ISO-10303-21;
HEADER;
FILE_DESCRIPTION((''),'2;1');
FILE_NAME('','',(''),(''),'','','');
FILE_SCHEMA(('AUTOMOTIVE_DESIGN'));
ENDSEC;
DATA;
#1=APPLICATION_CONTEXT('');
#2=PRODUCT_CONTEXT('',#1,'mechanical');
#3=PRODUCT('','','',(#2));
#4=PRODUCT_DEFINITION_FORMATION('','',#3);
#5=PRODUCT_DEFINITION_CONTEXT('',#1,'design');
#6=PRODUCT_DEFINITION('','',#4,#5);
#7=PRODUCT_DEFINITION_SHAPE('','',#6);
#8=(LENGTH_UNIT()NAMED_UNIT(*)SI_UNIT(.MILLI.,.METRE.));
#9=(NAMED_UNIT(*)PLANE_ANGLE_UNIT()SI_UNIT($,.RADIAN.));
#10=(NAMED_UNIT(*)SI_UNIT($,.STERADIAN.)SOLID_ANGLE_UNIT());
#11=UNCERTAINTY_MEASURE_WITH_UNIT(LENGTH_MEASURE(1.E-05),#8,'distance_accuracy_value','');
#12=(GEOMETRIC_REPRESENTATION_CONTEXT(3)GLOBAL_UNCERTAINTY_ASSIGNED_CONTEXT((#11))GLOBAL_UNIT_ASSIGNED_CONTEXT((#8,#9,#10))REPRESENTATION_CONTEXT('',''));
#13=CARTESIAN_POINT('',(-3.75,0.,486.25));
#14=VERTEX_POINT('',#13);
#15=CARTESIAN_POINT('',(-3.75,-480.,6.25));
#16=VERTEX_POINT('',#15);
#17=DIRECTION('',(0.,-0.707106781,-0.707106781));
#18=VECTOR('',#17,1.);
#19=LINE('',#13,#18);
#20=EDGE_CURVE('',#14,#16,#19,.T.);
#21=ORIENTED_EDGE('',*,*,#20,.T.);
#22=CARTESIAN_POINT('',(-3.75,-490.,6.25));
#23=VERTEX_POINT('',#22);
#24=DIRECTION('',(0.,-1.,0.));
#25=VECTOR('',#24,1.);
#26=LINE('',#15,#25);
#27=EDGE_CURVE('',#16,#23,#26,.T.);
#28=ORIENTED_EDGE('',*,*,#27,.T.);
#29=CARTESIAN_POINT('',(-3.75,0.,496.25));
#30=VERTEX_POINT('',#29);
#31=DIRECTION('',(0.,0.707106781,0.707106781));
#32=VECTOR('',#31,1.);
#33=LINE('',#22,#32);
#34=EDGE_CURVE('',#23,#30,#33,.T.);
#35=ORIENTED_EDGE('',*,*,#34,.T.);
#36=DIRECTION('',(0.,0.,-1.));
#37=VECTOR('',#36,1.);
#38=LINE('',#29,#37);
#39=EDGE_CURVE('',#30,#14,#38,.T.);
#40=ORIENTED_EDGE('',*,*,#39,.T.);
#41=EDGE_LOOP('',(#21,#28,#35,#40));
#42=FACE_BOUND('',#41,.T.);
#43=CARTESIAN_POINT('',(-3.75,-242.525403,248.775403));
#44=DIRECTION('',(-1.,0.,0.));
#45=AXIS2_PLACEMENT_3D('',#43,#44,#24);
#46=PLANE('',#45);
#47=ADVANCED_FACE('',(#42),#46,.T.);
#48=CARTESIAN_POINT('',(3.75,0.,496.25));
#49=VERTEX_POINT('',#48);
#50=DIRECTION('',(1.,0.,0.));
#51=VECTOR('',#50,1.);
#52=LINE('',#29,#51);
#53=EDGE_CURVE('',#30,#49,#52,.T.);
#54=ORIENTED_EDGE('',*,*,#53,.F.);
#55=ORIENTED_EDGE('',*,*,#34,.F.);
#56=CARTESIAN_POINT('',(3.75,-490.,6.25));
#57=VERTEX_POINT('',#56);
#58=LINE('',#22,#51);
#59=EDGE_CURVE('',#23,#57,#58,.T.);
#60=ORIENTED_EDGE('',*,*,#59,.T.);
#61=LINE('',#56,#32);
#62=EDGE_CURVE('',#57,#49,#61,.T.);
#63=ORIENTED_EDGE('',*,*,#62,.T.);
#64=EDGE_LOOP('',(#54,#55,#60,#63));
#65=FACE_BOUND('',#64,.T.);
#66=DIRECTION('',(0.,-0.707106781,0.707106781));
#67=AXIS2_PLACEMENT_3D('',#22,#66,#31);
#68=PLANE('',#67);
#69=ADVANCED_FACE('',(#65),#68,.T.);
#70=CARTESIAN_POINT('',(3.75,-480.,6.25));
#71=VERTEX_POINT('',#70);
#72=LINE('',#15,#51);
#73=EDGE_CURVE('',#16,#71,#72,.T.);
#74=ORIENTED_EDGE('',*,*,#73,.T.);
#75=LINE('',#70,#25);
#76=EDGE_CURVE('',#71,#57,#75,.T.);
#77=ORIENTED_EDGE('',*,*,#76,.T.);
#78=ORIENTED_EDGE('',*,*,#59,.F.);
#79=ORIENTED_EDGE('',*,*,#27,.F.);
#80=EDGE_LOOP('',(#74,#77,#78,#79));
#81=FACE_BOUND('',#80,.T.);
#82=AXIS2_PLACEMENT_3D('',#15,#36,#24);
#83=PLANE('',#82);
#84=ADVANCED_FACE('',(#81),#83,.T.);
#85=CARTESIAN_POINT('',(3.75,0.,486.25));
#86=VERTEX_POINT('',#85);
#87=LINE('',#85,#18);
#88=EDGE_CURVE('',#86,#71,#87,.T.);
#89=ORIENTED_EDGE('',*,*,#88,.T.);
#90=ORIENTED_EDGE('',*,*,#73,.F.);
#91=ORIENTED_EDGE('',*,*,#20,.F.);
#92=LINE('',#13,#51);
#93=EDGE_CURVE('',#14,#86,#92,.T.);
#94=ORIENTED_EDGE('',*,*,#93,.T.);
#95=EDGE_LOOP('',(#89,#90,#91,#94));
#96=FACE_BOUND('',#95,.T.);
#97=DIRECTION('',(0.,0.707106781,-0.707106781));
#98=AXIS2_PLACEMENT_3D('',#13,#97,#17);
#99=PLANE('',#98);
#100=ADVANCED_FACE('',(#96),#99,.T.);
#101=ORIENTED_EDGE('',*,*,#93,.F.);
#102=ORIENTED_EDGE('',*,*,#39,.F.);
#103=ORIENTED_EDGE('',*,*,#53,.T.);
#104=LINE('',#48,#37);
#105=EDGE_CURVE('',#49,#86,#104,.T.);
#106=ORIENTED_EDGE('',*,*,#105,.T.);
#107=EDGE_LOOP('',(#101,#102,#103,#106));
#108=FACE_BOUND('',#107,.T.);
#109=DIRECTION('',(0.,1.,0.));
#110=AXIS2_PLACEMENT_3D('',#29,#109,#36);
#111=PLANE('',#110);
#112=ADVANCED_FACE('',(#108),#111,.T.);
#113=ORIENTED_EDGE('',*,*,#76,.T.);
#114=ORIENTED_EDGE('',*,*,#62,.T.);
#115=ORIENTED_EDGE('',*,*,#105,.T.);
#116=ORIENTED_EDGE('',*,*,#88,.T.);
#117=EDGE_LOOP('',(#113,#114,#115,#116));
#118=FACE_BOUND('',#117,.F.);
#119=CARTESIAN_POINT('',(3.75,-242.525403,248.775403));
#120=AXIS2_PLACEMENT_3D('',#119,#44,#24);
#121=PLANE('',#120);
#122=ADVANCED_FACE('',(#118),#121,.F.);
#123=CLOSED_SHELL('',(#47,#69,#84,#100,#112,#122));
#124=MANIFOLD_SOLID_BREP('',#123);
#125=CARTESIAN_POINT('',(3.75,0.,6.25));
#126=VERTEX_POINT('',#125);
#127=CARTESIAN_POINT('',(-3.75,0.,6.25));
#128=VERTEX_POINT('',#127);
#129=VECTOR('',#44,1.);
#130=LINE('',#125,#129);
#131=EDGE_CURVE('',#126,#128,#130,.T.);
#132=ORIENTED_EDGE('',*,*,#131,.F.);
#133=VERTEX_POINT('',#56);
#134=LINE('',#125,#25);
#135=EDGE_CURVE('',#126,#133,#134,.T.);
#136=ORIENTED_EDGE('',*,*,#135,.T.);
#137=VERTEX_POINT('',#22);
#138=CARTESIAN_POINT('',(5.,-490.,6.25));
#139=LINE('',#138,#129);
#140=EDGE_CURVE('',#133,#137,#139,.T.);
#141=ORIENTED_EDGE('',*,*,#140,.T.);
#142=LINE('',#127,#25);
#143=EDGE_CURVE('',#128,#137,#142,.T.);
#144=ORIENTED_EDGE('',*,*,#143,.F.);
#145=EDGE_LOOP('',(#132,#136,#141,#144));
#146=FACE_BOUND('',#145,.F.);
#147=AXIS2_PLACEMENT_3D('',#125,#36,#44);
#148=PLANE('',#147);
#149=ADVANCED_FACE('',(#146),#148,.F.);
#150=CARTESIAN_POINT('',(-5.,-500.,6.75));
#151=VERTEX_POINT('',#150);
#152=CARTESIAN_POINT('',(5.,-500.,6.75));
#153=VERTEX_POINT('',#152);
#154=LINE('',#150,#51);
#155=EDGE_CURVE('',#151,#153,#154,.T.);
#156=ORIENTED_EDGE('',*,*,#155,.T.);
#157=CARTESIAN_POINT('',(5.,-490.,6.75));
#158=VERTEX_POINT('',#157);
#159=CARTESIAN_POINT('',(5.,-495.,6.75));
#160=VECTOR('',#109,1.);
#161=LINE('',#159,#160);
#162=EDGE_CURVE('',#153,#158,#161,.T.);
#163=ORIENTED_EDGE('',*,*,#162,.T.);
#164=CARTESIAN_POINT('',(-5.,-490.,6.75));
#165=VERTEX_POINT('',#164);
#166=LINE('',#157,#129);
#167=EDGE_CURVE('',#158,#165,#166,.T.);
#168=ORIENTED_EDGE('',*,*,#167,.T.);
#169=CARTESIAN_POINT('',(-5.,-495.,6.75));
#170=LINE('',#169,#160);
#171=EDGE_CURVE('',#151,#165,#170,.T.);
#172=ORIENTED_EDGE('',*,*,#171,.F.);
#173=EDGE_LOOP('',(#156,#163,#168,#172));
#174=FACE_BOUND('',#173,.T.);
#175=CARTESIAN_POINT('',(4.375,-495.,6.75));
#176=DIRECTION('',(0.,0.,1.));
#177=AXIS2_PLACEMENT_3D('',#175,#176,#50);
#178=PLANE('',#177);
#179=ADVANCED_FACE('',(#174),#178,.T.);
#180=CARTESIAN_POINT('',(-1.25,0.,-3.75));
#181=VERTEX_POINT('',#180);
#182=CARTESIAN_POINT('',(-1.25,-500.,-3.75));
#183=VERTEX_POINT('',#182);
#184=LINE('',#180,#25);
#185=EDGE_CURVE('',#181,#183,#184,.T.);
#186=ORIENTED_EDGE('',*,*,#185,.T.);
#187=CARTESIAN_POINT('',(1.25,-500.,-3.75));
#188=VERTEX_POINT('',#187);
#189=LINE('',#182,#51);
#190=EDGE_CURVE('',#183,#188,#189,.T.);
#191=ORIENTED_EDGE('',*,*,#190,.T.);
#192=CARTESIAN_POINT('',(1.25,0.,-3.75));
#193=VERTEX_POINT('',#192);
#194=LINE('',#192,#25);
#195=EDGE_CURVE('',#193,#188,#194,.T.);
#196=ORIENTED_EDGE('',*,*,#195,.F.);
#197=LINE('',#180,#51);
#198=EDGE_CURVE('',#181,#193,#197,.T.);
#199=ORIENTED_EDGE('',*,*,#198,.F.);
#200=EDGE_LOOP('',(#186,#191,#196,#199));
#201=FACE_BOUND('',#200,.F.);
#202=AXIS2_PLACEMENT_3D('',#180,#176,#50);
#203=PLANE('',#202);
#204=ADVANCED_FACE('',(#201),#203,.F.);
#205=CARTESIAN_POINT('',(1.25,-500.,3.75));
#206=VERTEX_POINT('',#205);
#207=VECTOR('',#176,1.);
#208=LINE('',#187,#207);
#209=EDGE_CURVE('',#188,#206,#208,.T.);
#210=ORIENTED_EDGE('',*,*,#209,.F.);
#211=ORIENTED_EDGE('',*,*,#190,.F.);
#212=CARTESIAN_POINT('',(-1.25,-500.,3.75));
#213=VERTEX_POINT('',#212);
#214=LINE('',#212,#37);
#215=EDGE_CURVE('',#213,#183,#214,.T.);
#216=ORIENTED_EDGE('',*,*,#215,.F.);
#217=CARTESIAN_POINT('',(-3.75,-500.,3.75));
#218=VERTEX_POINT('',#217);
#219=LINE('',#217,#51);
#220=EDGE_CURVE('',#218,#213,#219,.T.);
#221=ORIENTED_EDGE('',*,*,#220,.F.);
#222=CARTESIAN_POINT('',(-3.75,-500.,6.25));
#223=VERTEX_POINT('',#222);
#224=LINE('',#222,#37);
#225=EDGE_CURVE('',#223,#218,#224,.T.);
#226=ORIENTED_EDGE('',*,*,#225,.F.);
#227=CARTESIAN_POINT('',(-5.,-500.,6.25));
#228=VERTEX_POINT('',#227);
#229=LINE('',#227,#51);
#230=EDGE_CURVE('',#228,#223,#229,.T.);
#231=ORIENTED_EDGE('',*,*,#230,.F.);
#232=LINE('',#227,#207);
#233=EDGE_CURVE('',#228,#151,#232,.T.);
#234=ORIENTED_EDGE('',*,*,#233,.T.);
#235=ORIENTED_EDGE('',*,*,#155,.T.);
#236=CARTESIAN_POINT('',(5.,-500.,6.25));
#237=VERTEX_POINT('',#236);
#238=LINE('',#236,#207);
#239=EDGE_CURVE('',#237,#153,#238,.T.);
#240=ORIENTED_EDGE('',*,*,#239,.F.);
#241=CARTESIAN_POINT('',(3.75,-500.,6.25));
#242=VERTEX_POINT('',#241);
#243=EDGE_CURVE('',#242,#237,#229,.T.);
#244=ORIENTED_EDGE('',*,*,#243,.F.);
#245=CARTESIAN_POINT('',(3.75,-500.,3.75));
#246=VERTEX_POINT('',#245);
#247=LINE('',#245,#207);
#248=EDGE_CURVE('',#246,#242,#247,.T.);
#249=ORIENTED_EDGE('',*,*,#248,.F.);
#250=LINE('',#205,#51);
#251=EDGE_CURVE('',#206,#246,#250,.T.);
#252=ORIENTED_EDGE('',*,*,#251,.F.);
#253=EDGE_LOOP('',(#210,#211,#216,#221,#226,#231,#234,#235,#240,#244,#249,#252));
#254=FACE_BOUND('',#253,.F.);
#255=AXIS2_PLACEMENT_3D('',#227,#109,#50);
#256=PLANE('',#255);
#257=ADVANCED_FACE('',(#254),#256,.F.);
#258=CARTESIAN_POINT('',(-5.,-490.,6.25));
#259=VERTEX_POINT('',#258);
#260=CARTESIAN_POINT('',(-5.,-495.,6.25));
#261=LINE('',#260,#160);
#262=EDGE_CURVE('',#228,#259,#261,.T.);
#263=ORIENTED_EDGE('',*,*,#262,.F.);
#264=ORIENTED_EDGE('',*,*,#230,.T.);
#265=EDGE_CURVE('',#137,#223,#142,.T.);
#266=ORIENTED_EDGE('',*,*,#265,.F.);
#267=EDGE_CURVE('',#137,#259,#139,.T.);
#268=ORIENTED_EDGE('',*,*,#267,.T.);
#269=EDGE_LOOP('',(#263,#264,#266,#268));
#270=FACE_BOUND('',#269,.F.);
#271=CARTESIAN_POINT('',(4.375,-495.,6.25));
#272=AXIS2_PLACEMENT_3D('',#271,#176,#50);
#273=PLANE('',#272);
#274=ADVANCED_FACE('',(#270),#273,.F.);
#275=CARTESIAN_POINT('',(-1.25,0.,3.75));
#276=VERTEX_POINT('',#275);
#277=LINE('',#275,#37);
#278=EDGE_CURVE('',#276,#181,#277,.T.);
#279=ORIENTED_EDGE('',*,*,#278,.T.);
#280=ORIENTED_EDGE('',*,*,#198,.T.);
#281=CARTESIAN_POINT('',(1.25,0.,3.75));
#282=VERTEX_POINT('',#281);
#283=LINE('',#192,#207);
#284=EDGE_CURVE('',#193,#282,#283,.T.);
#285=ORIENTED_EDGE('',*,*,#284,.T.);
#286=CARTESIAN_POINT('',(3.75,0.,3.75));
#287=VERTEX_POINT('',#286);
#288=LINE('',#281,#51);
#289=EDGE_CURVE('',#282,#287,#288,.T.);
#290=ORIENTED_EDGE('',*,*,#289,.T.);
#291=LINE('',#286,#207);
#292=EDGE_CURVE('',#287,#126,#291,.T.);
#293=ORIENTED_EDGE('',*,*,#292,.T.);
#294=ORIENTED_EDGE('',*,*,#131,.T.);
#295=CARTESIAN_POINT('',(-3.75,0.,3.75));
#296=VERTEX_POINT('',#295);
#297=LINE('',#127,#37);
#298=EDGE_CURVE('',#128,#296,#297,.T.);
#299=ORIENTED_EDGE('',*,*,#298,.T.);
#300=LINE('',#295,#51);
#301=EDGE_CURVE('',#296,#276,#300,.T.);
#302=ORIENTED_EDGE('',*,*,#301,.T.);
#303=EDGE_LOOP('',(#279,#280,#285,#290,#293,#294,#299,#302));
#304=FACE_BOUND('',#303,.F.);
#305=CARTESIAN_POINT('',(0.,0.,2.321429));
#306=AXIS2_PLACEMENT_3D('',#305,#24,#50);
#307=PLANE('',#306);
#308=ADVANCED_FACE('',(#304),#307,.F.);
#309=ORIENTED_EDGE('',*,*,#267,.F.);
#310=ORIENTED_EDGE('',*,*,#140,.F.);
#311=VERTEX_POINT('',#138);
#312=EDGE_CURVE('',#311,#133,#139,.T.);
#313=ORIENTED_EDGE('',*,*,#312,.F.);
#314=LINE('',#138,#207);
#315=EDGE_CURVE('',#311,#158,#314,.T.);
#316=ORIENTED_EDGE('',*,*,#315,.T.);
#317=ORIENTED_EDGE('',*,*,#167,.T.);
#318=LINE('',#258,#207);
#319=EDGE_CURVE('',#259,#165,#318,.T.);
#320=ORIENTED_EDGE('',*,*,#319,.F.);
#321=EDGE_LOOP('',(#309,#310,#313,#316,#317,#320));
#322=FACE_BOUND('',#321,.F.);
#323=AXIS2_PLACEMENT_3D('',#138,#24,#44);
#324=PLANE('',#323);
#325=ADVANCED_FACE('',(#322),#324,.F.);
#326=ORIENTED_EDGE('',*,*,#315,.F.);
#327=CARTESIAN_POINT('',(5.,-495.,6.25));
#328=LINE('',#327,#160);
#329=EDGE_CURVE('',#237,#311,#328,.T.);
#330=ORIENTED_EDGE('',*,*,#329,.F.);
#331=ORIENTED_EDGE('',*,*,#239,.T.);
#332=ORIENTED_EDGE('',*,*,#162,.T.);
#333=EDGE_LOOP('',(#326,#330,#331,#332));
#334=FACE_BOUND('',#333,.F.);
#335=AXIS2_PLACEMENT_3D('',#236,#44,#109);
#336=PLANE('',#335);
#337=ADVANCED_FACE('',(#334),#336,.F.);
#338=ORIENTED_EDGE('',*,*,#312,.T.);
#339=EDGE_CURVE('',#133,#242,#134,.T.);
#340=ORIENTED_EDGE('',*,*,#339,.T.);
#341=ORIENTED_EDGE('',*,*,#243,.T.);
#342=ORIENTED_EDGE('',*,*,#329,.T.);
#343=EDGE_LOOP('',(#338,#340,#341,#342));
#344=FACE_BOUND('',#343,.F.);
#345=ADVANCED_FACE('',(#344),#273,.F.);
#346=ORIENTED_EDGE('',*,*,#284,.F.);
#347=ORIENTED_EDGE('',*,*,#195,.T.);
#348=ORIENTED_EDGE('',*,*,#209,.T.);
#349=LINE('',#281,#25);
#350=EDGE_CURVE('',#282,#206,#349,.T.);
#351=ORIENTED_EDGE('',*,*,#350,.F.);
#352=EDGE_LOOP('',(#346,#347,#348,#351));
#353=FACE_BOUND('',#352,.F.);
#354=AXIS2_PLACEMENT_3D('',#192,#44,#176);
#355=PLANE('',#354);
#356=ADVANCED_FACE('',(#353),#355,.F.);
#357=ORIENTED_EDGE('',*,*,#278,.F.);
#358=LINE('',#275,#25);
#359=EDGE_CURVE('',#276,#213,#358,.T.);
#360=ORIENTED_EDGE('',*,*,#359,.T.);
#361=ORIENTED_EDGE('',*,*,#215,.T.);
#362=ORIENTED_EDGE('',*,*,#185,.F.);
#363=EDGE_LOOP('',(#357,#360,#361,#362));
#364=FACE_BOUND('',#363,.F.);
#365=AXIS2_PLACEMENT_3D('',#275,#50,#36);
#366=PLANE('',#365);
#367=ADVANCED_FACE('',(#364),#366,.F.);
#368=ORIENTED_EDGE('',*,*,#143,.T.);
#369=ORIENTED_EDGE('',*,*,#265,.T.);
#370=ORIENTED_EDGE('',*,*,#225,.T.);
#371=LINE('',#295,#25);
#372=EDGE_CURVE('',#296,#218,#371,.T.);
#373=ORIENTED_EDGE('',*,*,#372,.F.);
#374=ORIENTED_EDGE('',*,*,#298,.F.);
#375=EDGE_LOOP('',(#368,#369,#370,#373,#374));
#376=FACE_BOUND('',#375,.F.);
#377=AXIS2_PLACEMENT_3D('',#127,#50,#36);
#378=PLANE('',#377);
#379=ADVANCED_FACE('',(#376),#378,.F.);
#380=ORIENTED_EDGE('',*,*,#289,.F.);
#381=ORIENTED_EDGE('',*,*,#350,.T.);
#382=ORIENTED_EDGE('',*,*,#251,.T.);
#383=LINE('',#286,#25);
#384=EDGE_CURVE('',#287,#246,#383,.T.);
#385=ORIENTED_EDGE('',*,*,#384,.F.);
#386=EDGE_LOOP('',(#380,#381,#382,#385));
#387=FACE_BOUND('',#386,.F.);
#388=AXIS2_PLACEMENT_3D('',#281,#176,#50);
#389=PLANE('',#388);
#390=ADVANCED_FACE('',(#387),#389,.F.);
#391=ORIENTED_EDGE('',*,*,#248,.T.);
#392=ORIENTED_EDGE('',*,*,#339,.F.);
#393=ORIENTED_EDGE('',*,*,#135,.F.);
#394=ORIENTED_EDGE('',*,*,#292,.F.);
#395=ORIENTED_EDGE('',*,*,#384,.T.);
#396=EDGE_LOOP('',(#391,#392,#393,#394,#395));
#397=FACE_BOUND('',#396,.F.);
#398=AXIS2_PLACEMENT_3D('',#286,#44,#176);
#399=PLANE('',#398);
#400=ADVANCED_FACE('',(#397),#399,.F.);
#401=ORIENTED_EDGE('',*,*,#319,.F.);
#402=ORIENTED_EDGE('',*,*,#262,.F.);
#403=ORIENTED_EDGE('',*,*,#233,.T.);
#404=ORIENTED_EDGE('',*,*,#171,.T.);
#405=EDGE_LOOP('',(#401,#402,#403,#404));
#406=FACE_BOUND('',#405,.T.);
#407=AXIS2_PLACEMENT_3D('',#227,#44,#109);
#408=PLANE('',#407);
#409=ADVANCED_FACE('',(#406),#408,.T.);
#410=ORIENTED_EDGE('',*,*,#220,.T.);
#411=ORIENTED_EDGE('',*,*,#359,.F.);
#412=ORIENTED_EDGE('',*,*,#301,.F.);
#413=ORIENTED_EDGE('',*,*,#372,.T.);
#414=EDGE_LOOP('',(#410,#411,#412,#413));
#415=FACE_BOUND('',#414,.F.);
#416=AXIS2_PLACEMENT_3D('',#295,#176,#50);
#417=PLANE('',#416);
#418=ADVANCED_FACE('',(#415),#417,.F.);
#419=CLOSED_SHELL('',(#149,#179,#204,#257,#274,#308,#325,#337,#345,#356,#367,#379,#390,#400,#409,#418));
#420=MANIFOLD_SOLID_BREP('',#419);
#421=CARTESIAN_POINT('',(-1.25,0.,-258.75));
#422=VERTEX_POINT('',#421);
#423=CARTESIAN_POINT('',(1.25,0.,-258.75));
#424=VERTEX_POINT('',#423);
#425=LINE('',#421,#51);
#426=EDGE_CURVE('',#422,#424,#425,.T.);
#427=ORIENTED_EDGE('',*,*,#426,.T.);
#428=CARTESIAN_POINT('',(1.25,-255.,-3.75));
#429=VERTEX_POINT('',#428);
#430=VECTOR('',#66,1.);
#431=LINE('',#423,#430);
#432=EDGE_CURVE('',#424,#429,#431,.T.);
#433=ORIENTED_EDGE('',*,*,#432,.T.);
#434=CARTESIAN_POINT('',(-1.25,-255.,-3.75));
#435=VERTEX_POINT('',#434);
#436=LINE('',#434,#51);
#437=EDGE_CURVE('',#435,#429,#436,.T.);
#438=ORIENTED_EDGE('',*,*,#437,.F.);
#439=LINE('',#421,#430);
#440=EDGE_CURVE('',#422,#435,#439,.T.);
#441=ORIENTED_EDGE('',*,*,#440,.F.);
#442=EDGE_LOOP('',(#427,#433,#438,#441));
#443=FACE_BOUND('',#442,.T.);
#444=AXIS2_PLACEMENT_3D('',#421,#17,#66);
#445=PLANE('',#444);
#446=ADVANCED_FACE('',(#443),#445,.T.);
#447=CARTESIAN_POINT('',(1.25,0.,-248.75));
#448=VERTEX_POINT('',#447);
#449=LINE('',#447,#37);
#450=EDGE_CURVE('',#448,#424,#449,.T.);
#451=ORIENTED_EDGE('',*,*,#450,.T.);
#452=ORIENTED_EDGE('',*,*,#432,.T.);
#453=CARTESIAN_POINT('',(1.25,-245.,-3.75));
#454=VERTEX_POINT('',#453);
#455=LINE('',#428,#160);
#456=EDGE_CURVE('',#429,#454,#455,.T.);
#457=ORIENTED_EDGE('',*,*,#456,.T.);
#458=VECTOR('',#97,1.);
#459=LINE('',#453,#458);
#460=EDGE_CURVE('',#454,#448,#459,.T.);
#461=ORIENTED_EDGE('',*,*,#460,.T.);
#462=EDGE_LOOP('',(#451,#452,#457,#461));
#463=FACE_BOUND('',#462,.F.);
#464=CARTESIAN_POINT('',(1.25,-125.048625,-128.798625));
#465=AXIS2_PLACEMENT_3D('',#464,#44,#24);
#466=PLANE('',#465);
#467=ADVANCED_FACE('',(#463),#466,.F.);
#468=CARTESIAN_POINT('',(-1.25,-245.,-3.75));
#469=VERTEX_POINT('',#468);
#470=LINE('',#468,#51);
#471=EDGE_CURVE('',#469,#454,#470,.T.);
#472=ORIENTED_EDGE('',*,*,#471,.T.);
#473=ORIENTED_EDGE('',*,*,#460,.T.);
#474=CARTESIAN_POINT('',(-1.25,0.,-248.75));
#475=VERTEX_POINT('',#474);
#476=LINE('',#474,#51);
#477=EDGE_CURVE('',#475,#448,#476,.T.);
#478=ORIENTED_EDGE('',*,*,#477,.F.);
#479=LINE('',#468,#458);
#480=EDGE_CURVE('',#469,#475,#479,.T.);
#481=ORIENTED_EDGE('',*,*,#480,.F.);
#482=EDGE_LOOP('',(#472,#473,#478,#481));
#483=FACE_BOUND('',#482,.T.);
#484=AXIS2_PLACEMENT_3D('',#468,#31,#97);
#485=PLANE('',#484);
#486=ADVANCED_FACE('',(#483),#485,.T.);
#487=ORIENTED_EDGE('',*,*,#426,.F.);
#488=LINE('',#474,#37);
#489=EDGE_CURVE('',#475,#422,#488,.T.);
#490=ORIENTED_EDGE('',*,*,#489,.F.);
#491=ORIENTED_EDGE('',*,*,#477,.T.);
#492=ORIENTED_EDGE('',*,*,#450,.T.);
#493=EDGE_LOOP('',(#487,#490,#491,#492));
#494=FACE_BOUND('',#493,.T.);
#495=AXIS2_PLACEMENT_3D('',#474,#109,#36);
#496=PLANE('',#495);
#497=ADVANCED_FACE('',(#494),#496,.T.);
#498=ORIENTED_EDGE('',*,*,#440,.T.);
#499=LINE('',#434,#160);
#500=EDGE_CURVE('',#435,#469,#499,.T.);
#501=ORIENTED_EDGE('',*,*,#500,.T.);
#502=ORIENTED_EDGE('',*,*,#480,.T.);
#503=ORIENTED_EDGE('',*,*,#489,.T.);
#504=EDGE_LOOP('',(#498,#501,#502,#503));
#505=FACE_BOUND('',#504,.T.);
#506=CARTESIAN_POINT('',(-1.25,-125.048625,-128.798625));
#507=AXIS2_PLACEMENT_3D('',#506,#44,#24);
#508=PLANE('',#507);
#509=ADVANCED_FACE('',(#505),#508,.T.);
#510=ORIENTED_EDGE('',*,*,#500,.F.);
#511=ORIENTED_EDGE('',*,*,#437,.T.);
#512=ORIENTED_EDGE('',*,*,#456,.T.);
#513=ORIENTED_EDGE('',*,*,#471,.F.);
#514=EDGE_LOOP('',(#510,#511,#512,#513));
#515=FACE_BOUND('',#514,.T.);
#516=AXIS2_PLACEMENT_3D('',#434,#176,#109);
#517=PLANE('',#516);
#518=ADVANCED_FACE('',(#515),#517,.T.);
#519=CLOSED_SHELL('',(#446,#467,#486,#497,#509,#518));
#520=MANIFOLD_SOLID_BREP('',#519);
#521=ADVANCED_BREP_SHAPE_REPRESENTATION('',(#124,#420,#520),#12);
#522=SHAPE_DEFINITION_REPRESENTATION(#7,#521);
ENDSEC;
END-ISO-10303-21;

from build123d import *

# Parameters (mm, degrees)
F1_DEPTH = 500
F3_DEPTH = 7.5
F5_DEPTH = 2.5
F6_W     = 1.25
F6_H     = 10
F6_W_2   = 7.5
F7_DEPTH = 0.5


with BuildPart() as f1:
    # F0 (on Front) → F1 (new body)
    with BuildSketch(Plane.XZ):
        Polygon((-1.25, 3.75), (-1.25, -3.75), (1.25, -3.75), (1.25, 3.75), (3.75, 3.75), (3.75, 6.25), (-3.75, 6.25), (-3.75, 3.75), align=None)
    extrude(amount=F1_DEPTH)

    # F6 (on face) → F7 (join)
    with BuildSketch(Plane.XY.offset(6.25)):
        with Locations((4.375, -495)):
            Rectangle(F6_W, F6_H)
        with Locations((0, -495)):
            Rectangle(F6_W_2, F6_H)
        with Locations((-4.375, -495)):
            Rectangle(F6_W, F6_H)
    extrude(amount=F7_DEPTH)


with BuildPart() as f3:
    # F2 (on face) → F3 (new body)
    with BuildSketch(Plane(origin=(-3.75, 0, 0), x_dir=(0, -1, 0), z_dir=(-1, 0, 0))):
        Polygon((490, 6.25), (0, 496.25), (0, 486.25), (480, 6.25), align=None)
    extrude(amount=-F3_DEPTH)


with BuildPart() as f5:
    # F4 (on face) → F5 (new body)
    with BuildSketch(Plane(origin=(-1.25, 0, 0), x_dir=(0, -1, 0), z_dir=(-1, 0, 0))):
        Polygon((245, -3.75), (0, -248.75), (0, -258.75), (255, -3.75), align=None)
    extrude(amount=-F5_DEPTH)


solid = Compound([f1.part, f3.part, f5.part])
